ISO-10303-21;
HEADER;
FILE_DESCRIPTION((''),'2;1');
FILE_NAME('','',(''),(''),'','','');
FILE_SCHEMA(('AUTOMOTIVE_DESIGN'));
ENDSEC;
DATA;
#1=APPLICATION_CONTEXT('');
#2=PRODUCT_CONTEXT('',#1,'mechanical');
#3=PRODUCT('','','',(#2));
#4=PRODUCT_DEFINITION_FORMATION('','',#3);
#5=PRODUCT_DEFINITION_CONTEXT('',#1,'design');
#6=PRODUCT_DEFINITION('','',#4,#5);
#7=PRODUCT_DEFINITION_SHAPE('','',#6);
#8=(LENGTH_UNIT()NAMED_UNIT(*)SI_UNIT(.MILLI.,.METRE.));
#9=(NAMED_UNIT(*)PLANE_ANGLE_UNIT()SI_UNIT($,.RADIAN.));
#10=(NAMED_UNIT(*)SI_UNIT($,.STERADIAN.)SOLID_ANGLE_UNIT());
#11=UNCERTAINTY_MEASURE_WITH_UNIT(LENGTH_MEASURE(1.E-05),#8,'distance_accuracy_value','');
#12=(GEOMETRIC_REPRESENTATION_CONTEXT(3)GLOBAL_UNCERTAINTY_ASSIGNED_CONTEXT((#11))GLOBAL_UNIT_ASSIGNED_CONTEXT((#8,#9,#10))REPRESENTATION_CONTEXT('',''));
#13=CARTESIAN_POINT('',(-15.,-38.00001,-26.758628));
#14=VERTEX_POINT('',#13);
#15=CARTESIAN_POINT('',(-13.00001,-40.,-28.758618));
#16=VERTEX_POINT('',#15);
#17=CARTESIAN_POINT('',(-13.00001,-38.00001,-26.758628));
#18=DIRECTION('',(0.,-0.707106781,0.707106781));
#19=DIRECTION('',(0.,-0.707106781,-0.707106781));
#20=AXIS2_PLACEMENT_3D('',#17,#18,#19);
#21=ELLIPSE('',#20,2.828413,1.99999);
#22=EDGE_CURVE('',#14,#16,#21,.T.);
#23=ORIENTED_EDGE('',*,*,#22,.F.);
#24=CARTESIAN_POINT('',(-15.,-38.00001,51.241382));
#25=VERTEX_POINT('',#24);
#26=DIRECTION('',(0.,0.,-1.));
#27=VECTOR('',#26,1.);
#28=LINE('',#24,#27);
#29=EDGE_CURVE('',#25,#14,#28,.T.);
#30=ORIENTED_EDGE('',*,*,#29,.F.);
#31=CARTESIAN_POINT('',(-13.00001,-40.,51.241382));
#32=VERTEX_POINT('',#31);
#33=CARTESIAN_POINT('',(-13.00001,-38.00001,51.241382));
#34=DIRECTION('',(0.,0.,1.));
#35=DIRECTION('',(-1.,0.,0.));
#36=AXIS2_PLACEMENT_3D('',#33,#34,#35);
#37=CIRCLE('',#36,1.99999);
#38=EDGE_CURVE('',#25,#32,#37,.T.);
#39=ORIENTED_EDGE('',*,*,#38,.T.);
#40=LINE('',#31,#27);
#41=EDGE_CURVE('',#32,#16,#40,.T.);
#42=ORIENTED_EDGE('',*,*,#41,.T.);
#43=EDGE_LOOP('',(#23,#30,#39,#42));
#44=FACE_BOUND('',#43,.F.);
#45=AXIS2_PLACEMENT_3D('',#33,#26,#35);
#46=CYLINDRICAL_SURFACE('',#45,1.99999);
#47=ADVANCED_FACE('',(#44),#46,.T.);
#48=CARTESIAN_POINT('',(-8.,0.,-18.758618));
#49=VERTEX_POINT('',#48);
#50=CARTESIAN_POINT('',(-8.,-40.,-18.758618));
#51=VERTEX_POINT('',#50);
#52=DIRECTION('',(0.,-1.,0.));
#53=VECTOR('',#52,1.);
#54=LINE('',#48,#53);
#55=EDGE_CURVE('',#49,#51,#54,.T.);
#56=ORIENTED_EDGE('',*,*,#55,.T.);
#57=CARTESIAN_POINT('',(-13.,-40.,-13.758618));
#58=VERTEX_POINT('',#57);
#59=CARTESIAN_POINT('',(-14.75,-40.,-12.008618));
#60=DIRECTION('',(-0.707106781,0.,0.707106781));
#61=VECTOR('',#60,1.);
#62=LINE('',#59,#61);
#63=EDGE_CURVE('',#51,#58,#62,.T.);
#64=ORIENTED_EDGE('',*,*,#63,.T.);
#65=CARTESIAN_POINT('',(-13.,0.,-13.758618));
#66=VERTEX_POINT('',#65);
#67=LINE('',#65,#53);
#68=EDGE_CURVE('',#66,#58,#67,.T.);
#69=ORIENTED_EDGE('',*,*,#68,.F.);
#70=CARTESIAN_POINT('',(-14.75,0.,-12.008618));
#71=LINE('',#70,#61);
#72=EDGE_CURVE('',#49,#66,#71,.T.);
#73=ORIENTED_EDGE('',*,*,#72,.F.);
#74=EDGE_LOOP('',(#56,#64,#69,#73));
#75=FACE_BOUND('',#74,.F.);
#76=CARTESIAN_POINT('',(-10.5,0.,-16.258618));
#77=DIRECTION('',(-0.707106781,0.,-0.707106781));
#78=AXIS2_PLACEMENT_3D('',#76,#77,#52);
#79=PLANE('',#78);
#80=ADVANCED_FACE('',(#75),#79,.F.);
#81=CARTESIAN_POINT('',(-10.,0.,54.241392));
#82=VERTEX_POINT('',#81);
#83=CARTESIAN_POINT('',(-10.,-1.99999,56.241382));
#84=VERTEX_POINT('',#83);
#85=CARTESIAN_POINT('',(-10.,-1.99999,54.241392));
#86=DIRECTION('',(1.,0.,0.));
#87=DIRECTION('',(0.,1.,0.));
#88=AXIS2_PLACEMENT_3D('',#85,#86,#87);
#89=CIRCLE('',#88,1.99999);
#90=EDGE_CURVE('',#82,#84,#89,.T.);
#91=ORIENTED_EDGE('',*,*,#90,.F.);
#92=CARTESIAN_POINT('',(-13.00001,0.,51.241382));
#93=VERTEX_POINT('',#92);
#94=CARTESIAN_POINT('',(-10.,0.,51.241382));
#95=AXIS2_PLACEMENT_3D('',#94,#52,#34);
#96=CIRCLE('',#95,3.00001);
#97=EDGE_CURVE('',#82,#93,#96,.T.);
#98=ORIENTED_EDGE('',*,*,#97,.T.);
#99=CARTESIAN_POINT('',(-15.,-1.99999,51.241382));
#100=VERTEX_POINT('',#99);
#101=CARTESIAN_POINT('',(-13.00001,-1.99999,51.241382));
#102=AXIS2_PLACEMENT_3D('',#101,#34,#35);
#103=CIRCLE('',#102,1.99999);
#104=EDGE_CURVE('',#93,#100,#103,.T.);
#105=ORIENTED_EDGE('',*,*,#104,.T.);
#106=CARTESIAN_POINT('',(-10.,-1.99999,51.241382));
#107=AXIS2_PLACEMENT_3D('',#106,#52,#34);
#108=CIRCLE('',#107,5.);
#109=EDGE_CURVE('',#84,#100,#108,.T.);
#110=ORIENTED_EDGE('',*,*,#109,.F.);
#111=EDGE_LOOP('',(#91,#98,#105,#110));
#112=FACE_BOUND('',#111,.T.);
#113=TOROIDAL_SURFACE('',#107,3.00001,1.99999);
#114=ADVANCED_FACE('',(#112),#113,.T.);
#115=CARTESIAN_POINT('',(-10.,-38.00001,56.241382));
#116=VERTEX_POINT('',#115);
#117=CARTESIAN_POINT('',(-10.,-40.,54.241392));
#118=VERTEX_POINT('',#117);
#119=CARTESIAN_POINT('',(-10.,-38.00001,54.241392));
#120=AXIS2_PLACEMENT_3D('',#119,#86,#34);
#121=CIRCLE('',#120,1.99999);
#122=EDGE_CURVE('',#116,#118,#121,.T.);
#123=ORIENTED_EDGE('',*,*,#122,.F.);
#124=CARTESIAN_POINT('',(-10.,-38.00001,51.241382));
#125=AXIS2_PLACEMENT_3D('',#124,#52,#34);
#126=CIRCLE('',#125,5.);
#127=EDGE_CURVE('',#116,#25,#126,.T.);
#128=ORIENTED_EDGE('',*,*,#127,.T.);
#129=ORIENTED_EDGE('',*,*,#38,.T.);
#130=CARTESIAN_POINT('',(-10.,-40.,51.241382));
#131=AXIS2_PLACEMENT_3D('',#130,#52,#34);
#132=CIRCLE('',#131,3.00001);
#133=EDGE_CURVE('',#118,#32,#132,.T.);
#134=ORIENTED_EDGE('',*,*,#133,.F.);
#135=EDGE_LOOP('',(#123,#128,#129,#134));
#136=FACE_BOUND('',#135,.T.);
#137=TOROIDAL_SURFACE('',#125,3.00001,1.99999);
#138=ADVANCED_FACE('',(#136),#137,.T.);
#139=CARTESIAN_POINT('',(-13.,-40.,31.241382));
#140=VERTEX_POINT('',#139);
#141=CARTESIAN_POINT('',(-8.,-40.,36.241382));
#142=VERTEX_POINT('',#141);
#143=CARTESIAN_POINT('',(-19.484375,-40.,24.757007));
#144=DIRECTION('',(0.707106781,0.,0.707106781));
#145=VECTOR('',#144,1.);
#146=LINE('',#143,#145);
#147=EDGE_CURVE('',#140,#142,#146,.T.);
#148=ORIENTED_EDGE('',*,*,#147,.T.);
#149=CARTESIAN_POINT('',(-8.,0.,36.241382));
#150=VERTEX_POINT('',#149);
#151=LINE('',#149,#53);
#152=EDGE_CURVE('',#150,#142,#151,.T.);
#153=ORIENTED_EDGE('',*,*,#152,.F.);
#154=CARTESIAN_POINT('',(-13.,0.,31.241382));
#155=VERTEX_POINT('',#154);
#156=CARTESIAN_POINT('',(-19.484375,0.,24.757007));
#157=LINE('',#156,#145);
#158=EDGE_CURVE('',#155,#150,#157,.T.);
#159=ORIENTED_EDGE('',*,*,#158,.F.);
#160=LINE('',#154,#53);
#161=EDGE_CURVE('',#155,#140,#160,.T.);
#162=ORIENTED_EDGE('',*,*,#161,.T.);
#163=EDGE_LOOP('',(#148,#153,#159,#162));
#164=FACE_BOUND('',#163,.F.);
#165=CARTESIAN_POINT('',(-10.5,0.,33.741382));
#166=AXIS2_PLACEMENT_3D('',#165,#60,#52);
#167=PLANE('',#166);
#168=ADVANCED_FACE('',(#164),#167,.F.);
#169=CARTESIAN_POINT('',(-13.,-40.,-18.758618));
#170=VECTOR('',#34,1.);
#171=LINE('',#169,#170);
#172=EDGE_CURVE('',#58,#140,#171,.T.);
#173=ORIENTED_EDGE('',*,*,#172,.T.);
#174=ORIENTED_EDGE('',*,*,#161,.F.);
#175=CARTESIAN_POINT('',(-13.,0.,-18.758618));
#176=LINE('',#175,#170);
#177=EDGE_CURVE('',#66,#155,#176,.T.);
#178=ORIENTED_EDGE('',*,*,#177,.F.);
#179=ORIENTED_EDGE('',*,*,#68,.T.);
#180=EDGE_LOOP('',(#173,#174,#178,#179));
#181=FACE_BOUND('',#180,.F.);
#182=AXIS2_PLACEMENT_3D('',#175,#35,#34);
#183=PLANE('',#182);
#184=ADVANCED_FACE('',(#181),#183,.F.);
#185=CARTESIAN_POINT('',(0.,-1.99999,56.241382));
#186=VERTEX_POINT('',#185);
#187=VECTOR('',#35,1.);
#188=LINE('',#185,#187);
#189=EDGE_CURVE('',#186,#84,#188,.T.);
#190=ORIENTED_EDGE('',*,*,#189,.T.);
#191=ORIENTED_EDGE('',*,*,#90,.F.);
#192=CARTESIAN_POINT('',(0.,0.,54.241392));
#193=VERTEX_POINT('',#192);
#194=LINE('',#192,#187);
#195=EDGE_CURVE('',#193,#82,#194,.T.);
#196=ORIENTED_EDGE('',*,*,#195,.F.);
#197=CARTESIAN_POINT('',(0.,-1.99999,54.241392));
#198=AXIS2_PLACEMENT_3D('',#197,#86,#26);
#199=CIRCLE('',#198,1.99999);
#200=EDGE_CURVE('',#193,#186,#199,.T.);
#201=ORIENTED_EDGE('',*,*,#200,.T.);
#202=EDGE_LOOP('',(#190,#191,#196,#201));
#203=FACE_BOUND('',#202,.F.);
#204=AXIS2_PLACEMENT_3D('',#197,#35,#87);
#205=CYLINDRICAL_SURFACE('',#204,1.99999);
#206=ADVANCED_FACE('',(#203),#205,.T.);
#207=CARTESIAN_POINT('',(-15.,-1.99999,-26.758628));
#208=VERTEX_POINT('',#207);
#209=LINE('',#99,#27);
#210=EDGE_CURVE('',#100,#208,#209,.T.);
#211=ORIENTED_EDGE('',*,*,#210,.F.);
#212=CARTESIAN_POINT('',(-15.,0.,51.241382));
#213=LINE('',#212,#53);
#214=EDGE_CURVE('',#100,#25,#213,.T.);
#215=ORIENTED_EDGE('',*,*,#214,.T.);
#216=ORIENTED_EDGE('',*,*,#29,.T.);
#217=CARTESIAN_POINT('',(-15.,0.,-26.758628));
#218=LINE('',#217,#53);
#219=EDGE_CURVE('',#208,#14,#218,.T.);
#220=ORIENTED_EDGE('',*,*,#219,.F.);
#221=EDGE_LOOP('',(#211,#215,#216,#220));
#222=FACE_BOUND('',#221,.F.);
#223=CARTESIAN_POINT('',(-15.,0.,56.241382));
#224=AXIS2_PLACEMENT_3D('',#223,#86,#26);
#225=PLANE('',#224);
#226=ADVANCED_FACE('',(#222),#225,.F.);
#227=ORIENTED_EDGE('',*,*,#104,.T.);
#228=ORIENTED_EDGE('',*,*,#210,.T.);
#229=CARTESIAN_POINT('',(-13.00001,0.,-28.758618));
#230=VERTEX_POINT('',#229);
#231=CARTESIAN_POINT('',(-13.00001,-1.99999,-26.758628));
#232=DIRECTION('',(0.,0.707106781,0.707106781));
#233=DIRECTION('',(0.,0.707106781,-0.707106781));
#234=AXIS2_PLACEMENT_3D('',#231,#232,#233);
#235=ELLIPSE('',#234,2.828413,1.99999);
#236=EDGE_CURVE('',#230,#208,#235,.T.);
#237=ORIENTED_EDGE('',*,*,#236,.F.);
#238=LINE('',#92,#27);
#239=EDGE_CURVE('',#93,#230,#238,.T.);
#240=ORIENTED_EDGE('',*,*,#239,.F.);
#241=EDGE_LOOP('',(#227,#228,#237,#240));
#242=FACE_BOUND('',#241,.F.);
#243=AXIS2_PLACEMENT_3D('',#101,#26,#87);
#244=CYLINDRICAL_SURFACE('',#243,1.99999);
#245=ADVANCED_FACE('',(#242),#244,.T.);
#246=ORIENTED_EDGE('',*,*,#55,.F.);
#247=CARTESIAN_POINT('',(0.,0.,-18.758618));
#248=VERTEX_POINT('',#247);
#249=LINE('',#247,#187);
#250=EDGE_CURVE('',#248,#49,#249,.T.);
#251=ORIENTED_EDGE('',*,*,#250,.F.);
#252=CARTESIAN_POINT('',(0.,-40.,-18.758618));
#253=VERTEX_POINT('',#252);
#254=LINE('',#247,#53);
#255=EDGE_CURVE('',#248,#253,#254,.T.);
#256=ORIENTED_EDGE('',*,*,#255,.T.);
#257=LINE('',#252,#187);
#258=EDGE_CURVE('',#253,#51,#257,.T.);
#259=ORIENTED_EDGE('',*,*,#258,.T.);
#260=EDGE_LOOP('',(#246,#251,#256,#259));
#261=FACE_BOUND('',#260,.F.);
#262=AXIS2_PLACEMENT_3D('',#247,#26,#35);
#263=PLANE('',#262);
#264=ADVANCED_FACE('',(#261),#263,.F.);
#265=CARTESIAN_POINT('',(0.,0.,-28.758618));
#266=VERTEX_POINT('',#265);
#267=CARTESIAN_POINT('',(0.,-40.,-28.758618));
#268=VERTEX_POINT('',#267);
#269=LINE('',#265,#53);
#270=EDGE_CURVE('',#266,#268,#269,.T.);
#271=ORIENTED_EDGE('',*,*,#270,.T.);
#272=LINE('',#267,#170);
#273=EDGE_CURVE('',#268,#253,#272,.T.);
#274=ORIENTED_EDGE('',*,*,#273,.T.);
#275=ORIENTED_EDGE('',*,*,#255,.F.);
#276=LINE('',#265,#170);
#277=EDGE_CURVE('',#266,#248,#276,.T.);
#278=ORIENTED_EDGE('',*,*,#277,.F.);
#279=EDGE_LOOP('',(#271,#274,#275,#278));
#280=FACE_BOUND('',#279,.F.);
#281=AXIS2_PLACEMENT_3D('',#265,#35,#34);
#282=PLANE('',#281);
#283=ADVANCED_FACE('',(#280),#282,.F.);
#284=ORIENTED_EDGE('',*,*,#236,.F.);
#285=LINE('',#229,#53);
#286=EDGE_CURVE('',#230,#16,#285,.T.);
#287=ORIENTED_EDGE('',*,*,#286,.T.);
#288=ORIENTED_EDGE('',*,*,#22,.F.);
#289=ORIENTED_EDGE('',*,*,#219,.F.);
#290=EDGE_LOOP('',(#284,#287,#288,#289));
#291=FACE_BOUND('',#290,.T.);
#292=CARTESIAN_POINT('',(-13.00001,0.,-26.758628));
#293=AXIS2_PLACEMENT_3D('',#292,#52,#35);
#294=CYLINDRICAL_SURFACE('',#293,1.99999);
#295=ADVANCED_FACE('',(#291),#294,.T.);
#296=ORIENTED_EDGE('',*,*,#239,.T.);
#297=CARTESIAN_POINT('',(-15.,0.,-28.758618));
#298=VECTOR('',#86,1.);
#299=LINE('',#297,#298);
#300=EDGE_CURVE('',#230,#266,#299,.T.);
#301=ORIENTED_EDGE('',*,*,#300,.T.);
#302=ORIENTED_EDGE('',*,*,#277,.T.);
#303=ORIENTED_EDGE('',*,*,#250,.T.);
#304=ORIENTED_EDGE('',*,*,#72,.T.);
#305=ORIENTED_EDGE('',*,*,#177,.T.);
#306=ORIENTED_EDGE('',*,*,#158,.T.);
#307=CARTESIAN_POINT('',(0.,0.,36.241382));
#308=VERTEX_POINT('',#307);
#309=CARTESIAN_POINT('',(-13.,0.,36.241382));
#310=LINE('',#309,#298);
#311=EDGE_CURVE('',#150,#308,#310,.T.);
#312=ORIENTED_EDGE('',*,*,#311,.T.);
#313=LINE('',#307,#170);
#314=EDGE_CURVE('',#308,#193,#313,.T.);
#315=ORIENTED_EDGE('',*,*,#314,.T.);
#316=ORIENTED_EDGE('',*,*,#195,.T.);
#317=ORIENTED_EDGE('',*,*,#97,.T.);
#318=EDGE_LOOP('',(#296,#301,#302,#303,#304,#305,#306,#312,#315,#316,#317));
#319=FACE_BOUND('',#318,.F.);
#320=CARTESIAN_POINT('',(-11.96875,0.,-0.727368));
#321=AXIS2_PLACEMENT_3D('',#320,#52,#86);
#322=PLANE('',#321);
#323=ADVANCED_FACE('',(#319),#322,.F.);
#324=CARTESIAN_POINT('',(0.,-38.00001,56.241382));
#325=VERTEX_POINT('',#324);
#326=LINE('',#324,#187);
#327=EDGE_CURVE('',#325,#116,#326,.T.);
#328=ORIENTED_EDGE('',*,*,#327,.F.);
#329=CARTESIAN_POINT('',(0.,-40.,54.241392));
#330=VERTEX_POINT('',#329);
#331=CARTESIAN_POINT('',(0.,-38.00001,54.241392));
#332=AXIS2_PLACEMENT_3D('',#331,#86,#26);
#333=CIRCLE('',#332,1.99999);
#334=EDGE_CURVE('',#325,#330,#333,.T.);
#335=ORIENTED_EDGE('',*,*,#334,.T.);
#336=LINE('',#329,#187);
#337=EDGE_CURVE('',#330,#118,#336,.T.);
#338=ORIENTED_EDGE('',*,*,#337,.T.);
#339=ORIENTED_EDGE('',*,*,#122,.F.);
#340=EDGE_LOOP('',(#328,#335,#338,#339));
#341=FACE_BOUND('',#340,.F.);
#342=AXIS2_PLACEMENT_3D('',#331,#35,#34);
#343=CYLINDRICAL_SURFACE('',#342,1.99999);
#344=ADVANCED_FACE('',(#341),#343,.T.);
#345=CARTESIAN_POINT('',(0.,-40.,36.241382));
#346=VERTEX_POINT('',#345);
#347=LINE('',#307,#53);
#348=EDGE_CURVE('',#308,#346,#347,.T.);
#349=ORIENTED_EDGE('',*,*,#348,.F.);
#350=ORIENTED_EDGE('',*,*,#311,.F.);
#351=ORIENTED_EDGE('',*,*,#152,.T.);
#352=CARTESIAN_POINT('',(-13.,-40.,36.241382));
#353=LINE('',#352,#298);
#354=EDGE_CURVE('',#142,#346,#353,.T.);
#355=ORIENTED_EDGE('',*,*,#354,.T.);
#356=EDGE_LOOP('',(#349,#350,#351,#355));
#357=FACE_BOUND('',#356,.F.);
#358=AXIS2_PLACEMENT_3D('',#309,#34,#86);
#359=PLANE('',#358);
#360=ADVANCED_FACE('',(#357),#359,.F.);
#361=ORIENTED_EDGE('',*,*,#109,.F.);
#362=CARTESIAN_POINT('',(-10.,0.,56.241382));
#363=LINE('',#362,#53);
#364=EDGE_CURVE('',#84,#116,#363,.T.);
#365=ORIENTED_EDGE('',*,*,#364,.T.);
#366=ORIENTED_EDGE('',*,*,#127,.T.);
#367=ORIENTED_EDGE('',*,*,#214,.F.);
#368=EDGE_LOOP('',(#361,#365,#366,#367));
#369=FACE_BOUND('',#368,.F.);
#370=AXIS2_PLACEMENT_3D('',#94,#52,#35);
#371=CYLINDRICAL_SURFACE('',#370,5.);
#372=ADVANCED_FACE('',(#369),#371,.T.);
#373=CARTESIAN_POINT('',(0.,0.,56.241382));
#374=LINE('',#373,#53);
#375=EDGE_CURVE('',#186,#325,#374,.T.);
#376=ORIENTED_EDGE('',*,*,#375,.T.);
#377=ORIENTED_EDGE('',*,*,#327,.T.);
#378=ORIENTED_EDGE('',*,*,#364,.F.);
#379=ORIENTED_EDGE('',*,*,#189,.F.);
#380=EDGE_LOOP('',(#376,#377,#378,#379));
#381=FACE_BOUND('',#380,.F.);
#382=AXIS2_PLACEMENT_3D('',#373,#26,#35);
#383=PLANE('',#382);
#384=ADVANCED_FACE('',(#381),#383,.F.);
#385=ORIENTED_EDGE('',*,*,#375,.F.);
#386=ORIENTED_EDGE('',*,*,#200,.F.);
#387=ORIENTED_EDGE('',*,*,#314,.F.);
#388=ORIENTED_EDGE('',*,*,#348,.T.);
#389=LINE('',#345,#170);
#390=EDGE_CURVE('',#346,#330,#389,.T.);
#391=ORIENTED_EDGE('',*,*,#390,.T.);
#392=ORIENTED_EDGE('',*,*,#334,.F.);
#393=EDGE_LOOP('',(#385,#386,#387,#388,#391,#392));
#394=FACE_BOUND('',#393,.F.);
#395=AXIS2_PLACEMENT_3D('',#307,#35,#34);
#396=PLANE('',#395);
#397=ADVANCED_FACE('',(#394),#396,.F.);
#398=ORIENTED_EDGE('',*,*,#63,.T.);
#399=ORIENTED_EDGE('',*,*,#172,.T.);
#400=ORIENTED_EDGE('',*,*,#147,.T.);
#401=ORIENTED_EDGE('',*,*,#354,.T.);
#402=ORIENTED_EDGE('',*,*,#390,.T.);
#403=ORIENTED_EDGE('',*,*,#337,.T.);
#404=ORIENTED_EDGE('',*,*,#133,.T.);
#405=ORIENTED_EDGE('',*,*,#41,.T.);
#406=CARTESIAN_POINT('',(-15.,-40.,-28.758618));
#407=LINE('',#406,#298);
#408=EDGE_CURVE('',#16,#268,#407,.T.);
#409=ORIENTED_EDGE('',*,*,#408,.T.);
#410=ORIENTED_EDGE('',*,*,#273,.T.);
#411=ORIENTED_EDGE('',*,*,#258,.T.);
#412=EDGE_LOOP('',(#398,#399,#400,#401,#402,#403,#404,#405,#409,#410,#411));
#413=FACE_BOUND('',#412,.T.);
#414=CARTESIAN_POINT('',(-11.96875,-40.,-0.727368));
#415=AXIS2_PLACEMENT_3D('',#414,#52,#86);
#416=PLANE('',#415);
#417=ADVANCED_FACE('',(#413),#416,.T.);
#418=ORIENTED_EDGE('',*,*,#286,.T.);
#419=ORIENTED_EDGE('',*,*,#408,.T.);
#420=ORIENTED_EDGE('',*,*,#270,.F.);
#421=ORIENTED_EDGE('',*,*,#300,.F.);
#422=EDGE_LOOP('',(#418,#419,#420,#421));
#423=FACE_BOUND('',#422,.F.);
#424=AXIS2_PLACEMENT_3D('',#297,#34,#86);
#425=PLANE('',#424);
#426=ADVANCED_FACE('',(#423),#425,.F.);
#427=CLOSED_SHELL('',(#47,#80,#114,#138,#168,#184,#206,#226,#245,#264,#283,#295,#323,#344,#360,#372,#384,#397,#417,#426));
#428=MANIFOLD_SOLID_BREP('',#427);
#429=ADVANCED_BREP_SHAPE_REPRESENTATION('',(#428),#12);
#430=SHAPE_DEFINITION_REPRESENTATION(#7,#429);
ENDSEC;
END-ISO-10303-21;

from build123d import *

# Parameters (mm, degrees)
F1_DEPTH = 40
F2_SIZE  = 5
F3_R     = 5
F4_R     = 1.99999


# Not quite as in the source:
# - a fillet or chamfer is up to 0.001 mm smaller than in the source, because OpenCascade refuses the exact size


with BuildPart() as f1:
    # F0 (on Front) → F1 (new body)
    with BuildSketch(Plane.XZ):
        Polygon((-13, 36.2413817516), (-15, 36.2413817516), (-15, -28.7586182484), (0, -28.7586182484), (0, -18.7586182484), (-13, -18.7586182484), align=None)
        Polygon((0, 36.2413817516), (0, 56.2413817516), (-15, 56.2413817516), (-15, 36.2413817516), (-13, 36.2413817516), align=None)
    extrude(amount=F1_DEPTH)

    # F2
    f2_edges = [f1.edges().sort_by_distance(p)[0] for p in [
        (-13, -20, -18.758618),
        (-13, -20, 36.241382),
    ]]
    chamfer(f2_edges, length=F2_SIZE)

    # F3
    f3_edges = [f1.edges().sort_by_distance(p)[0] for p in [
        (-15, -20, 56.241382),
    ]]
    fillet(f3_edges, radius=F3_R)

    # F4 (radius 2 in the source; OpenCascade refuses exactly that, so slightly less here)
    f4_edges = [f1.edges().sort_by_distance(p)[0] for p in [
        (-15, 0, 11.241382),
        (-15, -20, 51.241382),
        (-15, -20, -28.758618),
        (-15, -40, 11.241382),
    ]]
    fillet(f4_edges, radius=F4_R)


solid = f1.part
